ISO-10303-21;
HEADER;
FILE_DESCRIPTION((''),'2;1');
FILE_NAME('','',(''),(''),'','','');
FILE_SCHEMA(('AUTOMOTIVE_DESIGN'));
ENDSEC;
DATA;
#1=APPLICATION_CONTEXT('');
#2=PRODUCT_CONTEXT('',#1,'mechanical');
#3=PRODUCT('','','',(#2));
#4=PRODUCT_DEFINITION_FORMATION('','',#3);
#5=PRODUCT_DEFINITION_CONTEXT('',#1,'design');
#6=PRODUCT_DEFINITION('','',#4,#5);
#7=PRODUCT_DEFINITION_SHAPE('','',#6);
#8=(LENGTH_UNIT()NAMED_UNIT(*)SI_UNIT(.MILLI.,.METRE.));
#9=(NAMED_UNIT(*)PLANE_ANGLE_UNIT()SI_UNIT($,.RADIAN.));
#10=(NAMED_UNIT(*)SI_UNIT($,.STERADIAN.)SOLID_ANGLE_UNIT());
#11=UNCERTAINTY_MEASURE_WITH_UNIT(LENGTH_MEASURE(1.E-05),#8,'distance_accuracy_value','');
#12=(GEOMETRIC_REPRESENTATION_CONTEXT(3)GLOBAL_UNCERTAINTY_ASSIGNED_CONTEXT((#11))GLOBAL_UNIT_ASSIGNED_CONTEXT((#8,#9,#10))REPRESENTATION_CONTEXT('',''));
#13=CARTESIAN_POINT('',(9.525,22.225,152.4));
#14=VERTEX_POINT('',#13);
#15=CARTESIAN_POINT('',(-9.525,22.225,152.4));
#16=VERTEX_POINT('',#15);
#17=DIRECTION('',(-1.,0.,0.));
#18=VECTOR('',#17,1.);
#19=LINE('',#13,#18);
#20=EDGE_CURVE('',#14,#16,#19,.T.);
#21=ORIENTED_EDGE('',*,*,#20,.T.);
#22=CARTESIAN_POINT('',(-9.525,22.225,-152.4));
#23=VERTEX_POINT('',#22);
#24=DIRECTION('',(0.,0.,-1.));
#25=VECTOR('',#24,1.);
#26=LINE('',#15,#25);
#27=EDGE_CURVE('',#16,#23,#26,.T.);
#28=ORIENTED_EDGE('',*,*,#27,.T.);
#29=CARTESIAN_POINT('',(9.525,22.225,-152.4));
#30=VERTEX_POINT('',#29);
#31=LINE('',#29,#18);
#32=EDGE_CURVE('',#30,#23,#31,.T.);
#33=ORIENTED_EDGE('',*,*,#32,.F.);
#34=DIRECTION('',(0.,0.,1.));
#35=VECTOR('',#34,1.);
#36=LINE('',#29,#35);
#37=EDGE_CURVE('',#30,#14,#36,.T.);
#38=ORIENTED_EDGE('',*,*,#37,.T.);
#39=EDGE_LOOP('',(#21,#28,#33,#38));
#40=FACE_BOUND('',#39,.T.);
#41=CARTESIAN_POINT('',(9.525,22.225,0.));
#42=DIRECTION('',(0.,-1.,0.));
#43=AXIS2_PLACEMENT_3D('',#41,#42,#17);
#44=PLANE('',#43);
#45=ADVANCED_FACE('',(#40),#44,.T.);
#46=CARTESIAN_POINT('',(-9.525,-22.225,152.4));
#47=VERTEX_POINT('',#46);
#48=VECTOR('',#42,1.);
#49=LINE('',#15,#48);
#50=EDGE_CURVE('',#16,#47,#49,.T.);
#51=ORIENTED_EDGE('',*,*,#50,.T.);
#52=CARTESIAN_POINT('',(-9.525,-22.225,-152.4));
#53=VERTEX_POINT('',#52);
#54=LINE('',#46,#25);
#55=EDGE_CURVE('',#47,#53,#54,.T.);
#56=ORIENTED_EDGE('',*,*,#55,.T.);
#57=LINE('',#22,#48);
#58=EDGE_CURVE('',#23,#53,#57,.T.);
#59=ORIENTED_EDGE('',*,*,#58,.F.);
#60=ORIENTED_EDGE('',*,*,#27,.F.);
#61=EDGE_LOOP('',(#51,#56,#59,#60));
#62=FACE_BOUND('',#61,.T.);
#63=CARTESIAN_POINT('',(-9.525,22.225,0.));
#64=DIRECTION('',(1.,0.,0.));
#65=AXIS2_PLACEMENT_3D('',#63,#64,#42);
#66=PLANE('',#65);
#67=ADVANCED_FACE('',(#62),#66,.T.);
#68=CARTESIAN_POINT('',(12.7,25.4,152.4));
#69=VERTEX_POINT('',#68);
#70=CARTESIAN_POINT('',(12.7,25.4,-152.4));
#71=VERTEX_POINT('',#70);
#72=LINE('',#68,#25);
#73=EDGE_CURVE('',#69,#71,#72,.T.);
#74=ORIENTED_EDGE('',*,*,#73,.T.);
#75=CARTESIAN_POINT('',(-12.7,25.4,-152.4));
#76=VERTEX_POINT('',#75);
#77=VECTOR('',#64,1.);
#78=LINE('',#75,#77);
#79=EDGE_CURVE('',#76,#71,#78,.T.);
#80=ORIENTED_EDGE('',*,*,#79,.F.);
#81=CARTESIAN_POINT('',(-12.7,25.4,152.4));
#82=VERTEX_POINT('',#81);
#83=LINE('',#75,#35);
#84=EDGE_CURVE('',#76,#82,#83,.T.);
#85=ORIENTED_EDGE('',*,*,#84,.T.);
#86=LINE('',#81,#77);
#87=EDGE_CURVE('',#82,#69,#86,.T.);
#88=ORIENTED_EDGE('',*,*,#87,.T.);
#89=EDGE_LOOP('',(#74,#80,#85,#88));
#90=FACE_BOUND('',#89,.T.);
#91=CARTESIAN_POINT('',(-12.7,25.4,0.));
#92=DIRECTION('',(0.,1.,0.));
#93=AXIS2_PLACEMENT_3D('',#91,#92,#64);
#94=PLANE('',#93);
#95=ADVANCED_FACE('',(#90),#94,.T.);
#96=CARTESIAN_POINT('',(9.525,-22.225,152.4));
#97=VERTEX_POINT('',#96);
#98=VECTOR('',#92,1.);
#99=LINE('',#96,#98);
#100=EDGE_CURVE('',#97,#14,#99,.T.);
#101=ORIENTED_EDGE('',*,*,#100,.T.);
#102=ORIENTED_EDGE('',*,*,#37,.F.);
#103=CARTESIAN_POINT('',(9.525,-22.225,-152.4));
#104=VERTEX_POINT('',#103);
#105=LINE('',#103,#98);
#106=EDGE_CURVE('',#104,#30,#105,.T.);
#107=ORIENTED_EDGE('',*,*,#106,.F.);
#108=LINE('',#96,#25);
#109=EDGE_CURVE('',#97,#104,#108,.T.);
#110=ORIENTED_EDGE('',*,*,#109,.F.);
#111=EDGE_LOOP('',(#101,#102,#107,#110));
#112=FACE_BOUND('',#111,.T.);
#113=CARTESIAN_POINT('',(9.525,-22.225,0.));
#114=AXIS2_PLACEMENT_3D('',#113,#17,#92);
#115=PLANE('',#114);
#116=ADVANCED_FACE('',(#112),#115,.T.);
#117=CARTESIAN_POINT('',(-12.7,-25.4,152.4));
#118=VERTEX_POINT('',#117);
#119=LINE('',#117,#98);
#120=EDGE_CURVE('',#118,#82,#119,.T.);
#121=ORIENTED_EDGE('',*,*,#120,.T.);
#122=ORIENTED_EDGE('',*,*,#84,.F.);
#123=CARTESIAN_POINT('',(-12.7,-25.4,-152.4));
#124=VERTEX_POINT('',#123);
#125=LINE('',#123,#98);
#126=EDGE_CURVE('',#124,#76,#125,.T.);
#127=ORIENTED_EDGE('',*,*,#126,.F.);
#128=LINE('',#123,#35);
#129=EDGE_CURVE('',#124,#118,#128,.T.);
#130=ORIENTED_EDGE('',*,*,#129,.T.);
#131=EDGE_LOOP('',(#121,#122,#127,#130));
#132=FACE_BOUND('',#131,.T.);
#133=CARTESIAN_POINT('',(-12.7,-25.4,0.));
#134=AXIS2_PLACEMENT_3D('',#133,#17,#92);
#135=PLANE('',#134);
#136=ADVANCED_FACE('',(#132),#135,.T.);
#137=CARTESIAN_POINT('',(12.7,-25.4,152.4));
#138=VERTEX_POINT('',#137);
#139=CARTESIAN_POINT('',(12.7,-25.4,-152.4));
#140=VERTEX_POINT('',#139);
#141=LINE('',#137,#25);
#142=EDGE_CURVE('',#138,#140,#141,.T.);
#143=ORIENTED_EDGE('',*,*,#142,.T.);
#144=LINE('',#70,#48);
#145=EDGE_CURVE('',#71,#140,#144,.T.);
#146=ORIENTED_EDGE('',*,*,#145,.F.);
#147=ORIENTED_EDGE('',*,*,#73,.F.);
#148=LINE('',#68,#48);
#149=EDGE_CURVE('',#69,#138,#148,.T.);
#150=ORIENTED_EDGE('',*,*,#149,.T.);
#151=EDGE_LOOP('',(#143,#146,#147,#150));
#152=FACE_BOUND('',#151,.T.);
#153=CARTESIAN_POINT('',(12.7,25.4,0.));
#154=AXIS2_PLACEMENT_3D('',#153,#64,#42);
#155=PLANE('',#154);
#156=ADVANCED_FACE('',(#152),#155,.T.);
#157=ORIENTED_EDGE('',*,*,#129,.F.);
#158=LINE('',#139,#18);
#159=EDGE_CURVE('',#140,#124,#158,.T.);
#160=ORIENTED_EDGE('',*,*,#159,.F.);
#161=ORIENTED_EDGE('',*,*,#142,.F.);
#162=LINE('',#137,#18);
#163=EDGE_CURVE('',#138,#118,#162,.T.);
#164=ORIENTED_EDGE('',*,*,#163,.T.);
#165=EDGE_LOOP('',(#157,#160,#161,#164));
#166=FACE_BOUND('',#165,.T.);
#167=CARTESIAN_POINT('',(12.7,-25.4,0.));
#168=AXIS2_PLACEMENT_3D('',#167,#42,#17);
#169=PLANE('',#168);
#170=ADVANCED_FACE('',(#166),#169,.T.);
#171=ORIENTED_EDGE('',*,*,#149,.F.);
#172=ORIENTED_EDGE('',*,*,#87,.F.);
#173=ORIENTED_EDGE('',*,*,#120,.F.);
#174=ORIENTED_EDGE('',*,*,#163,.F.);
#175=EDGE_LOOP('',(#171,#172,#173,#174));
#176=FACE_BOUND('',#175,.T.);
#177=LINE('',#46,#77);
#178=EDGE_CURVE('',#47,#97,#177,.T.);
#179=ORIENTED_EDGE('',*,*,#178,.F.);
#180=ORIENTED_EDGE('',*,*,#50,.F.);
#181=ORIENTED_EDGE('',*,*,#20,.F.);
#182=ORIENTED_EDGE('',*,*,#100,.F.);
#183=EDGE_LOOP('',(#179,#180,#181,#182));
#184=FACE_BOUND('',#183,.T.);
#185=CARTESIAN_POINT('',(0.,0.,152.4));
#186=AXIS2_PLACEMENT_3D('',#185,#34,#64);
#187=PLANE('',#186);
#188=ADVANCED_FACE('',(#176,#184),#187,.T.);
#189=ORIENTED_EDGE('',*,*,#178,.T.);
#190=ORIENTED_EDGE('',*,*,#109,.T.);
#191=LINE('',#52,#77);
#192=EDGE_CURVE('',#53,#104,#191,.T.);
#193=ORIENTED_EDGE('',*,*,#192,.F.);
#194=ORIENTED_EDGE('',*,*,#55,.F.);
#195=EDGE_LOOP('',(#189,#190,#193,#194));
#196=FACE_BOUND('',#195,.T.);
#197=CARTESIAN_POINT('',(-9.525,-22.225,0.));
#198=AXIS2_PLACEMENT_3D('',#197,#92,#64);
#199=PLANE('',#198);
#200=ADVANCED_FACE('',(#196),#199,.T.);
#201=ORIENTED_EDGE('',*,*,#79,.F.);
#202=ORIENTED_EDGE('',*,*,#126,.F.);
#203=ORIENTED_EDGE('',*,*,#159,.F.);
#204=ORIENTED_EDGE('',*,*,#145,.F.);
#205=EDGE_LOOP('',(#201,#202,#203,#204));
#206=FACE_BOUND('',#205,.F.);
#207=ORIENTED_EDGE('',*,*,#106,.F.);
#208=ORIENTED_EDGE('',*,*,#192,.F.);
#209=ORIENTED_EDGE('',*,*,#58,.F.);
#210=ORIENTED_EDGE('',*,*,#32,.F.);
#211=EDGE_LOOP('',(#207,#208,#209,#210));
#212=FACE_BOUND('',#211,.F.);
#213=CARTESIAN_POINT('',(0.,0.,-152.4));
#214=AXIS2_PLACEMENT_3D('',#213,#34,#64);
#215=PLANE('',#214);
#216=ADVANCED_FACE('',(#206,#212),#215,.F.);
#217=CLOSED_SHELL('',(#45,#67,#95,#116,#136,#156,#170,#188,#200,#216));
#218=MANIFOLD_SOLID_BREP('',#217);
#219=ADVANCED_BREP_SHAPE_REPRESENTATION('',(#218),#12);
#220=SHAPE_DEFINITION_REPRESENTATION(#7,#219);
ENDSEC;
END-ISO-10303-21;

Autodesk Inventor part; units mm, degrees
ref_plane "YZ Plane" through (0, 0, 0) normal (1, 0, 0) x (0, 1, 0)
ref_plane "XZ Plane" through (0, 0, 0) normal (0, 1, 0) x (-1, 0, 0)
ref_plane "XY Plane" through (0, 0, 0) normal (0, 0, 1) x (1, 0, 0)
sketch "Sketch1" plane through (0, 0, 0) normal (0, 0, 1) x (1, 0, 0)
  line L0 (-12.7, 25.4) -> (12.7, 25.4)
  line L1 (12.7, 25.4) -> (12.7, -25.4)
  line L2 (12.7, -25.4) -> (-12.7, -25.4)
  line L3 (-12.7, -25.4) -> (-12.7, 25.4)
  line L4 (9.525, 22.225) -> (-9.525, 22.225)
  line L5 (-9.525, 22.225) -> (-9.525, -22.225)
  line L6 (-9.525, -22.225) -> (9.525, -22.225)
  line L7 (9.525, -22.225) -> (9.525, 22.225)
  point P0 (0, 0)
  point P1 (0, 25.4)
  point P2 (-12.7, 0)
extrude "Extrusion1" add sketch "Sketch1" along normal mid plane 304.8
properties part number "Aluminum Box Tube" material "Aluminum 6061"
